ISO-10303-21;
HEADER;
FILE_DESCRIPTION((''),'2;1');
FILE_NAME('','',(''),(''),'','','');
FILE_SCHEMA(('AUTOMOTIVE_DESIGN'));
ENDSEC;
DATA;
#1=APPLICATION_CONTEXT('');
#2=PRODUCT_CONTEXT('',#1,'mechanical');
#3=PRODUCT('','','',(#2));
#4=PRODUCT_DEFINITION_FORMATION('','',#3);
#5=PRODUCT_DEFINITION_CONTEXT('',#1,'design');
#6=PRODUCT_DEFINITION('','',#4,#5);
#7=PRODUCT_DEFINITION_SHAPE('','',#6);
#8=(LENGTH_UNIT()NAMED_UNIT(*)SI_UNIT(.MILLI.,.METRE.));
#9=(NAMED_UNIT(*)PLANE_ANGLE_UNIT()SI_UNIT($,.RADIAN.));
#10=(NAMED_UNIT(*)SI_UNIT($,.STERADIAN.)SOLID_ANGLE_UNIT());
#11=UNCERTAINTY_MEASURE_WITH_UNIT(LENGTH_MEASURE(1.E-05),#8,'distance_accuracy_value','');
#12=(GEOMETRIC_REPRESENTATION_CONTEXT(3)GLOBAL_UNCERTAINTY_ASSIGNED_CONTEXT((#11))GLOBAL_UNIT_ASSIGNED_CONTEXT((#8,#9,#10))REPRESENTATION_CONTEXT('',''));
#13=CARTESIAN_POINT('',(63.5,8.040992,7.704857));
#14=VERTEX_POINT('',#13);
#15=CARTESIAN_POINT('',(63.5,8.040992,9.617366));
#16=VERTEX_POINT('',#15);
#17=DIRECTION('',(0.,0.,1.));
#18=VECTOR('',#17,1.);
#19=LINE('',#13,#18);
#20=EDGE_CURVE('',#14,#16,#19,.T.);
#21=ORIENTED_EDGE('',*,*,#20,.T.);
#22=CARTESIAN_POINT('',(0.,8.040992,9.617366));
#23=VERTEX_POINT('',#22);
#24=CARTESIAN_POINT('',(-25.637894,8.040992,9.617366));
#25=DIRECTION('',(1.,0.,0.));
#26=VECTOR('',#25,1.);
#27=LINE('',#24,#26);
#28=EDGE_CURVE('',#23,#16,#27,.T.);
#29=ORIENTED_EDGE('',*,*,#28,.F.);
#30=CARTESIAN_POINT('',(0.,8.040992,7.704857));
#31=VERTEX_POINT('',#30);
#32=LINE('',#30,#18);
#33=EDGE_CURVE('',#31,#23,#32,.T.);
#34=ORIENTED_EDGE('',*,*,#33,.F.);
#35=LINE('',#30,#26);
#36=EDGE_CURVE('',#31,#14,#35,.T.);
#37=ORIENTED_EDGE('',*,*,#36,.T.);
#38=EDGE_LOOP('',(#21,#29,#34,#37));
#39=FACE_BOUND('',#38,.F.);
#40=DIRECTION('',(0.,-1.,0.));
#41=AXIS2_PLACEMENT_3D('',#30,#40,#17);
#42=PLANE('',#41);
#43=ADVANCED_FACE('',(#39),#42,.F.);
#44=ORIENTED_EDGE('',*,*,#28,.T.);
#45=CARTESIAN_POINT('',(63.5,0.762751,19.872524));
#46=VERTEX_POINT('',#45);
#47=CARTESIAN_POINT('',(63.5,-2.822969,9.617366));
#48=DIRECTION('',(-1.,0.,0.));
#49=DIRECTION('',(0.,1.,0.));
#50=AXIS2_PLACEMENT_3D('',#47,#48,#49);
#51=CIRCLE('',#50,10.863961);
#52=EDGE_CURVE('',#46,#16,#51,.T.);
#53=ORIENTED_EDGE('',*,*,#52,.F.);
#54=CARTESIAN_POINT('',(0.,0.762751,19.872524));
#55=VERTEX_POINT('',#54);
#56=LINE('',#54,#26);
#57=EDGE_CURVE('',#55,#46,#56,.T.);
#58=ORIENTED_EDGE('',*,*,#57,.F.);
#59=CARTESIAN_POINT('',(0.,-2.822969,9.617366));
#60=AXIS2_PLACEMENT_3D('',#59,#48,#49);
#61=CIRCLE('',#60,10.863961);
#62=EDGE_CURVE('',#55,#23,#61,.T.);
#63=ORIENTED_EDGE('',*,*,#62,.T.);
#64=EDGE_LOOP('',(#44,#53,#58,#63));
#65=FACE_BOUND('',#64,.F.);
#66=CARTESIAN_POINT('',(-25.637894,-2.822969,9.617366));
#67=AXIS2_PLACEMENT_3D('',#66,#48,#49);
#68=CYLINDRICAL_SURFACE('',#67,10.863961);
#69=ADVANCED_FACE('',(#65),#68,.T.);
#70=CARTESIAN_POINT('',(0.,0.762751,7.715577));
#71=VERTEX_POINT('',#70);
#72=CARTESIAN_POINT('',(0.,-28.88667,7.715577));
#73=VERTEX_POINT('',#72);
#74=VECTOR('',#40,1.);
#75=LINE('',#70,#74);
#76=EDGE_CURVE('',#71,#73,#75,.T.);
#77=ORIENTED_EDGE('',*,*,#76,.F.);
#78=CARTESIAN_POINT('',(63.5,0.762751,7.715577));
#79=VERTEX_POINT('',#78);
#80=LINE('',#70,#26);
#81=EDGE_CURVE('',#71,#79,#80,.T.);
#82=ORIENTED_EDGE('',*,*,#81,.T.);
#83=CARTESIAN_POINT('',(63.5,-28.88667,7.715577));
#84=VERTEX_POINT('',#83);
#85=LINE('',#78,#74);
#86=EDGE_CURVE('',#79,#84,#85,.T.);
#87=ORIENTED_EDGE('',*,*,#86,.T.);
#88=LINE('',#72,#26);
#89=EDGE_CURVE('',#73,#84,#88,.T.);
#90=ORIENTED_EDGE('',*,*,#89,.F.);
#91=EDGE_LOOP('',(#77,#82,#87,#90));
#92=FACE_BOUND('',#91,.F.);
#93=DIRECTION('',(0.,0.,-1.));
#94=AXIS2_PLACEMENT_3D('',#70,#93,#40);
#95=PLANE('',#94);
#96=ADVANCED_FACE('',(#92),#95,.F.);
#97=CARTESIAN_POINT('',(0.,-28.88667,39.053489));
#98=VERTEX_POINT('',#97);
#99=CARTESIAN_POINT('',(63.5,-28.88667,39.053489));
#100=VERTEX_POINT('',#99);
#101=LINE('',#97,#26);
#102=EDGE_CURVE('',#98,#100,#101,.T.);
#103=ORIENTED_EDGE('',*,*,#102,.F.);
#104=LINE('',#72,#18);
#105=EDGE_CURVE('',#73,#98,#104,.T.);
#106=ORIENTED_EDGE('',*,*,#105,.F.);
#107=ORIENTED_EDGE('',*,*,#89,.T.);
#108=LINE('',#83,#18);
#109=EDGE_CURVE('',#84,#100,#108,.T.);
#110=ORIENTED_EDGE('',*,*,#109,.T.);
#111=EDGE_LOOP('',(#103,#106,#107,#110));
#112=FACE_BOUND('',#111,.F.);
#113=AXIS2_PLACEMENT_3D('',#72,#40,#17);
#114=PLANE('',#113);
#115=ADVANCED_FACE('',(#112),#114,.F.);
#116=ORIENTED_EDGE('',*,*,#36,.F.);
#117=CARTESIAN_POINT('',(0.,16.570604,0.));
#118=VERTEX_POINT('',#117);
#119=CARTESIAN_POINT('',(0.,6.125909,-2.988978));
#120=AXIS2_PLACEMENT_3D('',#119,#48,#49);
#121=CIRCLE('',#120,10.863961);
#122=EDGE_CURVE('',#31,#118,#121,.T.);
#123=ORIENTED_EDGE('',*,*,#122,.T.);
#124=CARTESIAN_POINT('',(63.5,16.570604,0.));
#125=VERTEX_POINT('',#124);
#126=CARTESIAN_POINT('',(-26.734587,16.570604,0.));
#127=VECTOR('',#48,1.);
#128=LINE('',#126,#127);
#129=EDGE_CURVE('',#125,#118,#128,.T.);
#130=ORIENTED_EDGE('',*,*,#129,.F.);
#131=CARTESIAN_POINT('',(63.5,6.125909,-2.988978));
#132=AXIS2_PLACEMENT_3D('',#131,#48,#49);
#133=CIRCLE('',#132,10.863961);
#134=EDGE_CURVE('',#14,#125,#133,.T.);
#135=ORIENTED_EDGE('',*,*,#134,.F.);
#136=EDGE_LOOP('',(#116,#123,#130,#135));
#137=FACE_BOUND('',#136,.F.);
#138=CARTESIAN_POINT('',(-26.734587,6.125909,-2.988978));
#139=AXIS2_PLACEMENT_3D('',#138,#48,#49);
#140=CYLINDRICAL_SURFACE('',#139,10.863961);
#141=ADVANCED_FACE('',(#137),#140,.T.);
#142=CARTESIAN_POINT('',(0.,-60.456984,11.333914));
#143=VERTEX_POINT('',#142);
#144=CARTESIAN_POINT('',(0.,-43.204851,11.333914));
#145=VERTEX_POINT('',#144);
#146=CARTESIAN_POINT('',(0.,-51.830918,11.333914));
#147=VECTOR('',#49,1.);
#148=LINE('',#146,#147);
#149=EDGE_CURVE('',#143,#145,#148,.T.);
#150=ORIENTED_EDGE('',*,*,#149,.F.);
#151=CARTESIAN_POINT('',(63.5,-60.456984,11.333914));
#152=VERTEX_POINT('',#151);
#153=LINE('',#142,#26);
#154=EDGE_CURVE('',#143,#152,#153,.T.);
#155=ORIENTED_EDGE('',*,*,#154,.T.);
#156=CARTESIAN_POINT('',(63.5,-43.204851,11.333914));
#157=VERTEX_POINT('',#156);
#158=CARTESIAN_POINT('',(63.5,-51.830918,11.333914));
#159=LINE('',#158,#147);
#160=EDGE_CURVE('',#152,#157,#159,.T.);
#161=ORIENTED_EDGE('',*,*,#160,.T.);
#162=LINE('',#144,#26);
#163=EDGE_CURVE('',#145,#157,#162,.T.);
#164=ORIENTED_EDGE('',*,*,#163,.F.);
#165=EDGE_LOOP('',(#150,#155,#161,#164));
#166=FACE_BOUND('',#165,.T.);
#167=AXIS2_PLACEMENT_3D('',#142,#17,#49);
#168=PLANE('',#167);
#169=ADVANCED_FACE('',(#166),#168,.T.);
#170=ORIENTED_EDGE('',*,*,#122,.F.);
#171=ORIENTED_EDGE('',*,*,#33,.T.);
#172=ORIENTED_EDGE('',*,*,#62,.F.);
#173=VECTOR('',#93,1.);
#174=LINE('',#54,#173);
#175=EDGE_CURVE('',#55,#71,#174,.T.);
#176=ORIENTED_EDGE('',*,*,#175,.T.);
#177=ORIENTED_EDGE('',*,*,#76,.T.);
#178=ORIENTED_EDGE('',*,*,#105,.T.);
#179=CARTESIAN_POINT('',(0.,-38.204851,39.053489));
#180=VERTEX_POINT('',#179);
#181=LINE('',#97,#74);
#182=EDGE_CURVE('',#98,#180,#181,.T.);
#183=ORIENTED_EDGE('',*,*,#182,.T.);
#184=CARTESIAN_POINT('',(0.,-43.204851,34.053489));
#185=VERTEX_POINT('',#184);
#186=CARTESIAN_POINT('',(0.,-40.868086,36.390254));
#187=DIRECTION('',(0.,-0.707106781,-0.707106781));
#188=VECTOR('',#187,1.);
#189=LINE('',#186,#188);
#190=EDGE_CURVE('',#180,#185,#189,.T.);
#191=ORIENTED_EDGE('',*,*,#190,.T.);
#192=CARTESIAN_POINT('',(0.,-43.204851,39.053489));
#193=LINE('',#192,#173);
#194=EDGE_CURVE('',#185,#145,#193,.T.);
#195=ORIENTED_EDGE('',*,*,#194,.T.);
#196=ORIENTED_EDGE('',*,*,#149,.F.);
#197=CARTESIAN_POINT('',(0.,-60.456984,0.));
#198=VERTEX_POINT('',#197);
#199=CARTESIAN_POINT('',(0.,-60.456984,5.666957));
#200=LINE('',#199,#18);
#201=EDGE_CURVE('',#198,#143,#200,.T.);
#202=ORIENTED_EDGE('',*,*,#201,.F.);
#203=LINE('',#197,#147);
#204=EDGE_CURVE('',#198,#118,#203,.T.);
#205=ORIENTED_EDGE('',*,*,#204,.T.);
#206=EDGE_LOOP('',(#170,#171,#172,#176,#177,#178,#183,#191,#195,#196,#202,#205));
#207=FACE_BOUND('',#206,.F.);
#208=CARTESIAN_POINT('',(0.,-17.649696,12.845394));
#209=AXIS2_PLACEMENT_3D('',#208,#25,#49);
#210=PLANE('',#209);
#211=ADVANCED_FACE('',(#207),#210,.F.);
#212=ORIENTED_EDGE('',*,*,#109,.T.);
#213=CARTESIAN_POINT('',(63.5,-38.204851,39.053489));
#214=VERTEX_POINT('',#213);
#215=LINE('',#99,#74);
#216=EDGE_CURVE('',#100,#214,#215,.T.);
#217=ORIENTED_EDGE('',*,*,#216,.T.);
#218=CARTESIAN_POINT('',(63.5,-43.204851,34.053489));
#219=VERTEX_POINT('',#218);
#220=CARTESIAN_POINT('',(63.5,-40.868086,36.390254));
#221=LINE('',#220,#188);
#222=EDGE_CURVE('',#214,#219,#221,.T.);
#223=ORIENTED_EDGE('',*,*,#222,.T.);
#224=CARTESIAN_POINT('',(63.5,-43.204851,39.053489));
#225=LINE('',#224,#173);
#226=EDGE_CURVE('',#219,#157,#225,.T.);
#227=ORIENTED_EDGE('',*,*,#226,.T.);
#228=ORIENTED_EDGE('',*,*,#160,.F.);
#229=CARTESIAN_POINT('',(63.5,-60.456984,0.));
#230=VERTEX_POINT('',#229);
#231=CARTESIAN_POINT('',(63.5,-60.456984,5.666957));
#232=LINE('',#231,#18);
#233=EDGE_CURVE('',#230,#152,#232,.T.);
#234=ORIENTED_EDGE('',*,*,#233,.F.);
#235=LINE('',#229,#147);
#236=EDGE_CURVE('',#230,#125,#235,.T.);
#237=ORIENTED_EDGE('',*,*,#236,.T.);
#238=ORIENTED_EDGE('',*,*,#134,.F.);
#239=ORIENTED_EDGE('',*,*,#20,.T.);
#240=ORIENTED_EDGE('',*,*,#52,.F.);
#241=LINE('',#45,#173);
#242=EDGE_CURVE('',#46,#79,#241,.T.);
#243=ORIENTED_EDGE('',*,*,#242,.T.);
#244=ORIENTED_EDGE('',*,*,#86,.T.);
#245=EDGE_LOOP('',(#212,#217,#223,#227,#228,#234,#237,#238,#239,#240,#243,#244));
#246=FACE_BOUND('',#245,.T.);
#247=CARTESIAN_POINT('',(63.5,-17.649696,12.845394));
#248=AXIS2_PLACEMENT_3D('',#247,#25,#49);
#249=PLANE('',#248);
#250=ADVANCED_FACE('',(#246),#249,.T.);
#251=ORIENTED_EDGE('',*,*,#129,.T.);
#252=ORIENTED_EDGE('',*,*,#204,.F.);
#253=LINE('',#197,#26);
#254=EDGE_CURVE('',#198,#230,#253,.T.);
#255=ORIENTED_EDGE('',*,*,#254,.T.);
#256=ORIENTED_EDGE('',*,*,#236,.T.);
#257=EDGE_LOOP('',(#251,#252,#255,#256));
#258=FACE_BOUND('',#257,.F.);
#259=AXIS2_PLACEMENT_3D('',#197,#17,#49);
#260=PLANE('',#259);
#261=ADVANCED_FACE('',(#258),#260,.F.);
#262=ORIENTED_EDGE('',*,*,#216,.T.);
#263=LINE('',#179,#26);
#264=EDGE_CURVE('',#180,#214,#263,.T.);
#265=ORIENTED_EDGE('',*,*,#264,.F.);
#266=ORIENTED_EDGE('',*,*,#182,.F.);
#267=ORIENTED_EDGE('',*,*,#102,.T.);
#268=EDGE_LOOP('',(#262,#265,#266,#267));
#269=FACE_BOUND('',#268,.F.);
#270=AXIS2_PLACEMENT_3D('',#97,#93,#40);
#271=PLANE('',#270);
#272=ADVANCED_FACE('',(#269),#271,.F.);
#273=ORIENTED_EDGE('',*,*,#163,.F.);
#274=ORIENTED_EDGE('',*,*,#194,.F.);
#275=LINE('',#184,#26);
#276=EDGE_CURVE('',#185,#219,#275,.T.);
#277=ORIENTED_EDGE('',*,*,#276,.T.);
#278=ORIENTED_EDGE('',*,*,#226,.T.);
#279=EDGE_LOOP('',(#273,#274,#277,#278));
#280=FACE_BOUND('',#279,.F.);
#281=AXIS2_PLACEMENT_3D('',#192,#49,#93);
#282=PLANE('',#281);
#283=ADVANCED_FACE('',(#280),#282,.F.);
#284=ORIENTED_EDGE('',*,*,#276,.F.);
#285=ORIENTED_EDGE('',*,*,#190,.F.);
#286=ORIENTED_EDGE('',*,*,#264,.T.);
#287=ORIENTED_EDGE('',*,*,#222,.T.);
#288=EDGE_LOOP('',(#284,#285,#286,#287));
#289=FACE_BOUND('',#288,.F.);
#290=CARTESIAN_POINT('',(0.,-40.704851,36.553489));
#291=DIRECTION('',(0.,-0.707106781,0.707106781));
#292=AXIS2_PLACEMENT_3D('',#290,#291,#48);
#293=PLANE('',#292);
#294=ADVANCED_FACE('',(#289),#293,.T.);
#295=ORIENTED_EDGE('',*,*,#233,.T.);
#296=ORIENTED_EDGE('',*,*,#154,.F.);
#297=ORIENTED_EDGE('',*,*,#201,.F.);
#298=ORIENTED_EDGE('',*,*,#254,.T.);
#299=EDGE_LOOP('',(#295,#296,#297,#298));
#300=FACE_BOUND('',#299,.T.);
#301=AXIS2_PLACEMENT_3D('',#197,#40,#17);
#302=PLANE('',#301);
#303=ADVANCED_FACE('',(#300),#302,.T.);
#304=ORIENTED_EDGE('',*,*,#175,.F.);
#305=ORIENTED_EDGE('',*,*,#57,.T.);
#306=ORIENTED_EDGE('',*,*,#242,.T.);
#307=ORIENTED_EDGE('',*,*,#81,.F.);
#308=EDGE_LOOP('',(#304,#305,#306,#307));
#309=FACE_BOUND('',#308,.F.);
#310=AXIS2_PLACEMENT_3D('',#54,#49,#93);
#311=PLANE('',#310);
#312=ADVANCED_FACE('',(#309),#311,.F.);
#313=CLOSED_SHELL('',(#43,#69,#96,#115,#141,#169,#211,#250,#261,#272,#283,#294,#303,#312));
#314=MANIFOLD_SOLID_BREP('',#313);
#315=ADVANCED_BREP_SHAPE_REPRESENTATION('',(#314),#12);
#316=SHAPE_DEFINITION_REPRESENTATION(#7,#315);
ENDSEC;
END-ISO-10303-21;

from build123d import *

# Parameters (mm, degrees)
F0_W        = 17.2521322966
F0_H        = 11.3339135423
F1_DEPTH    = 63.5
F2_T1_DEPTH = 116.9691747536
F2_T3_DEPTH = 114.7757874589
F3_SIZE     = 5


# Not quite as in the source:
# - a fillet or chamfer that OpenCascade refuses, or shapes differently, is made with other operations: its cross-section is extruded or revolved along the edge and cut away or added


with BuildPart() as f1:
    # F0 (on Right) → F1 (new body)
    with BuildSketch(Plane.YZ):
        Polygon((-28.8866702467, 39.0534885228), (-43.2048514485, 39.0534885228), (-43.2048514485, 11.3339135423), (-43.2048514485, 0), (16.9898695312, 0), (16.9898695312, 7.7048568055), (8.0409916118, 7.7048568055), (8.0409916118, 19.8725238442), (0.7627514424, 19.8725238442), (0.7627514424, 7.7155772597), (-28.8866702467, 7.7155772597), align=None)
        with Locations((-51.8309175968, 5.6669567712)):
            Rectangle(F0_W, F0_H)
    extrude(amount=F1_DEPTH)

    # F2: fillet of radius 10.8639610307 on 2 edges, made by hand

    # F2_s2 → F2_t1 (cut)
    with BuildSketch(Plane.YZ.offset(-26.7345873768)):
        with BuildLine():
            ThreePointArc((16.9898695312, -2.9889781452), (14.4575061135, 3.9831184184), (8.0409916118, 7.7048568055))
            Line((8.0409916118, 7.7048568055), (16.9898695312, 7.7048568055))
            Line((16.9898695312, 7.7048568055), (16.9898695312, -2.9889781452))
        make_face()
    extrude(amount=F2_T1_DEPTH, mode=Mode.SUBTRACT)

    # F2_s4 → F2_t3 (cut)
    with BuildSketch(Plane.YZ.offset(-25.6378937294)):
        with BuildLine():
            ThreePointArc((8.0409916118, 9.6173663525), (6.0365108418, 15.9050733102), (0.7627514424, 19.8725238442))
            Line((0.7627514424, 19.8725238442), (8.0409916118, 19.8725238442))
            Line((8.0409916118, 19.8725238442), (8.0409916118, 9.6173663525))
        make_face()
    extrude(amount=F2_T3_DEPTH, mode=Mode.SUBTRACT)

    # F3
    f3_edges = [f1.edges().sort_by_distance(p)[0] for p in [
        (31.75, -43.204851, 39.053489),
    ]]
    chamfer(f3_edges, length=F3_SIZE)


solid = f1.part
